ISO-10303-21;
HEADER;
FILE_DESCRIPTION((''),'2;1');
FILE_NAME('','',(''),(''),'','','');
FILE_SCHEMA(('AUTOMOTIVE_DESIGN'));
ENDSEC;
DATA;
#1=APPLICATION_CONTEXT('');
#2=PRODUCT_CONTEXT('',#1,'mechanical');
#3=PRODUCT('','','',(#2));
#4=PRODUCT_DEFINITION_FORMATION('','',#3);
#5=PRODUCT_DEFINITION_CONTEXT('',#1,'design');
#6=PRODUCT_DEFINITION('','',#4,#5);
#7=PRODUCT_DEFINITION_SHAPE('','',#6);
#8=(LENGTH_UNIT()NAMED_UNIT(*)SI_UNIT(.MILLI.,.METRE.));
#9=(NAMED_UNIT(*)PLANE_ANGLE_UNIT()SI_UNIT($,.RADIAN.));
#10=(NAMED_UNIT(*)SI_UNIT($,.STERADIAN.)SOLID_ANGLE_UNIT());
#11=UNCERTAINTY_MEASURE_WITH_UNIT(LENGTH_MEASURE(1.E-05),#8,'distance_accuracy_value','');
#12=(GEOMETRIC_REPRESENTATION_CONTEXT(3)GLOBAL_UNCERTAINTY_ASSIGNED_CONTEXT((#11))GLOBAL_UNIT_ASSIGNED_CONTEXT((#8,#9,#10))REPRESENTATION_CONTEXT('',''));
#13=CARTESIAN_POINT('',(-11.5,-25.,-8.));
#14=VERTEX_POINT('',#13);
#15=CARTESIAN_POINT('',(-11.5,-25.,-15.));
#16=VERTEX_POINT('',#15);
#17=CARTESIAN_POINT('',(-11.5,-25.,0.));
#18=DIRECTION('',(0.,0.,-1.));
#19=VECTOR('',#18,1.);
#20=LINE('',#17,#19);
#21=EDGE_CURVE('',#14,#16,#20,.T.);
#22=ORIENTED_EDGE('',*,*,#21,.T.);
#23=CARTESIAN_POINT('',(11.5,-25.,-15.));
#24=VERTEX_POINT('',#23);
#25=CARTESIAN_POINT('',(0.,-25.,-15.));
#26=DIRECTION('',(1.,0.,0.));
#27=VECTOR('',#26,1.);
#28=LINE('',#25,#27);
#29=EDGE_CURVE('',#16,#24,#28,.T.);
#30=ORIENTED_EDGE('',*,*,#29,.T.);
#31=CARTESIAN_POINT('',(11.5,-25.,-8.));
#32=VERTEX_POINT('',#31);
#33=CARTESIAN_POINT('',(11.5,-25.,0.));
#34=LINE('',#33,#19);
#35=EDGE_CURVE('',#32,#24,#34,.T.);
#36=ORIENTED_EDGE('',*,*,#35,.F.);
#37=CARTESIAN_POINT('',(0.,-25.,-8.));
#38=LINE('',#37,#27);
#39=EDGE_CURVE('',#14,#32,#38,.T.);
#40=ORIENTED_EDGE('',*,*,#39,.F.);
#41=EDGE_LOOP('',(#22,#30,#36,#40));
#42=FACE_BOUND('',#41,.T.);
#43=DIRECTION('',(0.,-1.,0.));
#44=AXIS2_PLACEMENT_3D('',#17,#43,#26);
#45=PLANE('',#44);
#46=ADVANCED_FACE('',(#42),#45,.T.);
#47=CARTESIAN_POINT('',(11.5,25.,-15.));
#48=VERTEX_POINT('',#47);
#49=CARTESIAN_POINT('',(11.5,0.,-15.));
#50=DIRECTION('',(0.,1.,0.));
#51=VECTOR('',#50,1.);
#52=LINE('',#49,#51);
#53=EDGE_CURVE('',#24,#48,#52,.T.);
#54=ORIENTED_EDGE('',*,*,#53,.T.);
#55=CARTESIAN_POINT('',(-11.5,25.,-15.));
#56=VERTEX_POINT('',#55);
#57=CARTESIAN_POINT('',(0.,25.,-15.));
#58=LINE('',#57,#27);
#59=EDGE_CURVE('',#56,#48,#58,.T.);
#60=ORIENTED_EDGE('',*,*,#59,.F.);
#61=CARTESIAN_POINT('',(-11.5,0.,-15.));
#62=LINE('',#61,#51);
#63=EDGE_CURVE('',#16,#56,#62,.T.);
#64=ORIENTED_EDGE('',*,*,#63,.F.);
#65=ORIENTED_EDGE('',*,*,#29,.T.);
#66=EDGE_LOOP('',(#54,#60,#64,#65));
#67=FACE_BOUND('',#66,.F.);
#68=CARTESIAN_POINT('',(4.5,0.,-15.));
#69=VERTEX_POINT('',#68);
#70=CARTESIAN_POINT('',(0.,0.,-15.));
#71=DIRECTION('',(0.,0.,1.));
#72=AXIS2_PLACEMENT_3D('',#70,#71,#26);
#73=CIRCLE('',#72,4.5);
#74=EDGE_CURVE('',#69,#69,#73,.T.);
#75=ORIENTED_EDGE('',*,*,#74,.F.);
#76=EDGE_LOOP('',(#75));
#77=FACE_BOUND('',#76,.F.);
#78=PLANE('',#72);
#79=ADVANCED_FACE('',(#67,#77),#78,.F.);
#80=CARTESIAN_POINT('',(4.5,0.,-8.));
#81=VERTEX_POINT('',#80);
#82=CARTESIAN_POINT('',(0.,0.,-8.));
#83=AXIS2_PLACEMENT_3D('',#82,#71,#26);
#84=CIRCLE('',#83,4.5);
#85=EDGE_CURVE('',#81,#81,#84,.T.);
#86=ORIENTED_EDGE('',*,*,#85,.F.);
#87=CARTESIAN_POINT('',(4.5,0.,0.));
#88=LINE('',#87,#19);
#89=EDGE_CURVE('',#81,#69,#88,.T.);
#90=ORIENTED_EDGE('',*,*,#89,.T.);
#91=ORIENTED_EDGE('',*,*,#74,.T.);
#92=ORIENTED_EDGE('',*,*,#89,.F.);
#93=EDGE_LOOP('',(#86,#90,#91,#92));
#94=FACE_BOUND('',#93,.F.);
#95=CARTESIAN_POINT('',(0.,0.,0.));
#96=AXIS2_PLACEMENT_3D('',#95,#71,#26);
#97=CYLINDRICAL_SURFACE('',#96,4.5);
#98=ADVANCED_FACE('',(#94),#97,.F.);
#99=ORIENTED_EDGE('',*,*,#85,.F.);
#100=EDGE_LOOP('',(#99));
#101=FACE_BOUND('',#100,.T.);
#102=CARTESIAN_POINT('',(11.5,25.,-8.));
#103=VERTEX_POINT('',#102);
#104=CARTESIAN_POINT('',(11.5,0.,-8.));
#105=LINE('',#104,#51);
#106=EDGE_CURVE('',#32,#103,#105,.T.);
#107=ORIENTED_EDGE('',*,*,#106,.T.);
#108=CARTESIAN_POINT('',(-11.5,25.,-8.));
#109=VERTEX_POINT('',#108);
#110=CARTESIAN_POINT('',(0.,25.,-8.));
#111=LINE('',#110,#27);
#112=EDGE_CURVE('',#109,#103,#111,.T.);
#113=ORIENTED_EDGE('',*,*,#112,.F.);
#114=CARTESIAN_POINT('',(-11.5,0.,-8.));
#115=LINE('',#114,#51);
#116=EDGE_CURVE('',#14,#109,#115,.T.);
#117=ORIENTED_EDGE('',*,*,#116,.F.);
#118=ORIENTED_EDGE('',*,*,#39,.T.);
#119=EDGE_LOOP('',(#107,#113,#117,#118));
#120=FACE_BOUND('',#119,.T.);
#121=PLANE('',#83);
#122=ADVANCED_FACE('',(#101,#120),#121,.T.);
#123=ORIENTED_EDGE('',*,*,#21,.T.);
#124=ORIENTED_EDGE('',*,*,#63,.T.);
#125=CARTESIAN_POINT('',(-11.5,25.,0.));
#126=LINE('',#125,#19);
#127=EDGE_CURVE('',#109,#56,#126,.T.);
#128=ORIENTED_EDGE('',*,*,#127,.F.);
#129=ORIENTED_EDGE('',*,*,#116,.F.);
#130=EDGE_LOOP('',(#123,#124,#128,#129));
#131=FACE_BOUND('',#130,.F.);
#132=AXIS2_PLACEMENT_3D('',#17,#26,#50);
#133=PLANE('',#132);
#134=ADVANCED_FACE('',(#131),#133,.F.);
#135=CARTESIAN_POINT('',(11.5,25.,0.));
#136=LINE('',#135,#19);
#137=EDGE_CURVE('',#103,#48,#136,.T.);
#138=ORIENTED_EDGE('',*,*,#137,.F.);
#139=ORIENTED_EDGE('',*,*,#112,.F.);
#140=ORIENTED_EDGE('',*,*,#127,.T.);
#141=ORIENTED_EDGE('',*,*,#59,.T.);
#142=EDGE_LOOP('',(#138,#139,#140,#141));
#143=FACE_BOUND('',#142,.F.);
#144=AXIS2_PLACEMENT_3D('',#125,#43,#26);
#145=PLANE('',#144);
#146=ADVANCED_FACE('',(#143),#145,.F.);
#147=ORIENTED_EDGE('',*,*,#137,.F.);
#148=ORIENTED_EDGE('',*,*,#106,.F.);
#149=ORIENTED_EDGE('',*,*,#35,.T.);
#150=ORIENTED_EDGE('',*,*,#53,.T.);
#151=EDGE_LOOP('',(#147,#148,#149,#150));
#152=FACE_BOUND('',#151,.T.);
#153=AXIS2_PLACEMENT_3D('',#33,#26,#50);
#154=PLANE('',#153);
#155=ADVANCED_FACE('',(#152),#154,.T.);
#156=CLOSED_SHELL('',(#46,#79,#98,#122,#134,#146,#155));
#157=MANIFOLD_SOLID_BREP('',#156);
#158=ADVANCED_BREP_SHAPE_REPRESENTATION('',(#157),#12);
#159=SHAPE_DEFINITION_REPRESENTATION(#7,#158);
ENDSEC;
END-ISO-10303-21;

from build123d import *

# Parameters (mm, degrees)
F0_W     = 23
F0_H     = 50
F1_DEPTH = 15
F4_R     = 4.5
F5_DEPTH = 16
F6_W     = 23
F6_H     = 50
F7_DEPTH = 8


# Not quite as in the source:
# - a feature of the source that left no trace in its solid (it failed there, or was rolled back) is left out


with BuildPart() as f1:
    # F0 (on Top) → F1 (new body)
    with BuildSketch(Plane.XY):
        Rectangle(F0_W, F0_H)
    extrude(amount=-F1_DEPTH)

    # F4 (on face) → F5 (cut)
    with BuildSketch(Plane.XY):
        Circle(F4_R)
    extrude(amount=-F5_DEPTH, mode=Mode.SUBTRACT)

    # F6 (on face) → F7 (cut)
    with BuildSketch(Plane.XY):
        Rectangle(F6_W, F6_H)
    extrude(amount=-F7_DEPTH, mode=Mode.SUBTRACT)


solid = f1.part
